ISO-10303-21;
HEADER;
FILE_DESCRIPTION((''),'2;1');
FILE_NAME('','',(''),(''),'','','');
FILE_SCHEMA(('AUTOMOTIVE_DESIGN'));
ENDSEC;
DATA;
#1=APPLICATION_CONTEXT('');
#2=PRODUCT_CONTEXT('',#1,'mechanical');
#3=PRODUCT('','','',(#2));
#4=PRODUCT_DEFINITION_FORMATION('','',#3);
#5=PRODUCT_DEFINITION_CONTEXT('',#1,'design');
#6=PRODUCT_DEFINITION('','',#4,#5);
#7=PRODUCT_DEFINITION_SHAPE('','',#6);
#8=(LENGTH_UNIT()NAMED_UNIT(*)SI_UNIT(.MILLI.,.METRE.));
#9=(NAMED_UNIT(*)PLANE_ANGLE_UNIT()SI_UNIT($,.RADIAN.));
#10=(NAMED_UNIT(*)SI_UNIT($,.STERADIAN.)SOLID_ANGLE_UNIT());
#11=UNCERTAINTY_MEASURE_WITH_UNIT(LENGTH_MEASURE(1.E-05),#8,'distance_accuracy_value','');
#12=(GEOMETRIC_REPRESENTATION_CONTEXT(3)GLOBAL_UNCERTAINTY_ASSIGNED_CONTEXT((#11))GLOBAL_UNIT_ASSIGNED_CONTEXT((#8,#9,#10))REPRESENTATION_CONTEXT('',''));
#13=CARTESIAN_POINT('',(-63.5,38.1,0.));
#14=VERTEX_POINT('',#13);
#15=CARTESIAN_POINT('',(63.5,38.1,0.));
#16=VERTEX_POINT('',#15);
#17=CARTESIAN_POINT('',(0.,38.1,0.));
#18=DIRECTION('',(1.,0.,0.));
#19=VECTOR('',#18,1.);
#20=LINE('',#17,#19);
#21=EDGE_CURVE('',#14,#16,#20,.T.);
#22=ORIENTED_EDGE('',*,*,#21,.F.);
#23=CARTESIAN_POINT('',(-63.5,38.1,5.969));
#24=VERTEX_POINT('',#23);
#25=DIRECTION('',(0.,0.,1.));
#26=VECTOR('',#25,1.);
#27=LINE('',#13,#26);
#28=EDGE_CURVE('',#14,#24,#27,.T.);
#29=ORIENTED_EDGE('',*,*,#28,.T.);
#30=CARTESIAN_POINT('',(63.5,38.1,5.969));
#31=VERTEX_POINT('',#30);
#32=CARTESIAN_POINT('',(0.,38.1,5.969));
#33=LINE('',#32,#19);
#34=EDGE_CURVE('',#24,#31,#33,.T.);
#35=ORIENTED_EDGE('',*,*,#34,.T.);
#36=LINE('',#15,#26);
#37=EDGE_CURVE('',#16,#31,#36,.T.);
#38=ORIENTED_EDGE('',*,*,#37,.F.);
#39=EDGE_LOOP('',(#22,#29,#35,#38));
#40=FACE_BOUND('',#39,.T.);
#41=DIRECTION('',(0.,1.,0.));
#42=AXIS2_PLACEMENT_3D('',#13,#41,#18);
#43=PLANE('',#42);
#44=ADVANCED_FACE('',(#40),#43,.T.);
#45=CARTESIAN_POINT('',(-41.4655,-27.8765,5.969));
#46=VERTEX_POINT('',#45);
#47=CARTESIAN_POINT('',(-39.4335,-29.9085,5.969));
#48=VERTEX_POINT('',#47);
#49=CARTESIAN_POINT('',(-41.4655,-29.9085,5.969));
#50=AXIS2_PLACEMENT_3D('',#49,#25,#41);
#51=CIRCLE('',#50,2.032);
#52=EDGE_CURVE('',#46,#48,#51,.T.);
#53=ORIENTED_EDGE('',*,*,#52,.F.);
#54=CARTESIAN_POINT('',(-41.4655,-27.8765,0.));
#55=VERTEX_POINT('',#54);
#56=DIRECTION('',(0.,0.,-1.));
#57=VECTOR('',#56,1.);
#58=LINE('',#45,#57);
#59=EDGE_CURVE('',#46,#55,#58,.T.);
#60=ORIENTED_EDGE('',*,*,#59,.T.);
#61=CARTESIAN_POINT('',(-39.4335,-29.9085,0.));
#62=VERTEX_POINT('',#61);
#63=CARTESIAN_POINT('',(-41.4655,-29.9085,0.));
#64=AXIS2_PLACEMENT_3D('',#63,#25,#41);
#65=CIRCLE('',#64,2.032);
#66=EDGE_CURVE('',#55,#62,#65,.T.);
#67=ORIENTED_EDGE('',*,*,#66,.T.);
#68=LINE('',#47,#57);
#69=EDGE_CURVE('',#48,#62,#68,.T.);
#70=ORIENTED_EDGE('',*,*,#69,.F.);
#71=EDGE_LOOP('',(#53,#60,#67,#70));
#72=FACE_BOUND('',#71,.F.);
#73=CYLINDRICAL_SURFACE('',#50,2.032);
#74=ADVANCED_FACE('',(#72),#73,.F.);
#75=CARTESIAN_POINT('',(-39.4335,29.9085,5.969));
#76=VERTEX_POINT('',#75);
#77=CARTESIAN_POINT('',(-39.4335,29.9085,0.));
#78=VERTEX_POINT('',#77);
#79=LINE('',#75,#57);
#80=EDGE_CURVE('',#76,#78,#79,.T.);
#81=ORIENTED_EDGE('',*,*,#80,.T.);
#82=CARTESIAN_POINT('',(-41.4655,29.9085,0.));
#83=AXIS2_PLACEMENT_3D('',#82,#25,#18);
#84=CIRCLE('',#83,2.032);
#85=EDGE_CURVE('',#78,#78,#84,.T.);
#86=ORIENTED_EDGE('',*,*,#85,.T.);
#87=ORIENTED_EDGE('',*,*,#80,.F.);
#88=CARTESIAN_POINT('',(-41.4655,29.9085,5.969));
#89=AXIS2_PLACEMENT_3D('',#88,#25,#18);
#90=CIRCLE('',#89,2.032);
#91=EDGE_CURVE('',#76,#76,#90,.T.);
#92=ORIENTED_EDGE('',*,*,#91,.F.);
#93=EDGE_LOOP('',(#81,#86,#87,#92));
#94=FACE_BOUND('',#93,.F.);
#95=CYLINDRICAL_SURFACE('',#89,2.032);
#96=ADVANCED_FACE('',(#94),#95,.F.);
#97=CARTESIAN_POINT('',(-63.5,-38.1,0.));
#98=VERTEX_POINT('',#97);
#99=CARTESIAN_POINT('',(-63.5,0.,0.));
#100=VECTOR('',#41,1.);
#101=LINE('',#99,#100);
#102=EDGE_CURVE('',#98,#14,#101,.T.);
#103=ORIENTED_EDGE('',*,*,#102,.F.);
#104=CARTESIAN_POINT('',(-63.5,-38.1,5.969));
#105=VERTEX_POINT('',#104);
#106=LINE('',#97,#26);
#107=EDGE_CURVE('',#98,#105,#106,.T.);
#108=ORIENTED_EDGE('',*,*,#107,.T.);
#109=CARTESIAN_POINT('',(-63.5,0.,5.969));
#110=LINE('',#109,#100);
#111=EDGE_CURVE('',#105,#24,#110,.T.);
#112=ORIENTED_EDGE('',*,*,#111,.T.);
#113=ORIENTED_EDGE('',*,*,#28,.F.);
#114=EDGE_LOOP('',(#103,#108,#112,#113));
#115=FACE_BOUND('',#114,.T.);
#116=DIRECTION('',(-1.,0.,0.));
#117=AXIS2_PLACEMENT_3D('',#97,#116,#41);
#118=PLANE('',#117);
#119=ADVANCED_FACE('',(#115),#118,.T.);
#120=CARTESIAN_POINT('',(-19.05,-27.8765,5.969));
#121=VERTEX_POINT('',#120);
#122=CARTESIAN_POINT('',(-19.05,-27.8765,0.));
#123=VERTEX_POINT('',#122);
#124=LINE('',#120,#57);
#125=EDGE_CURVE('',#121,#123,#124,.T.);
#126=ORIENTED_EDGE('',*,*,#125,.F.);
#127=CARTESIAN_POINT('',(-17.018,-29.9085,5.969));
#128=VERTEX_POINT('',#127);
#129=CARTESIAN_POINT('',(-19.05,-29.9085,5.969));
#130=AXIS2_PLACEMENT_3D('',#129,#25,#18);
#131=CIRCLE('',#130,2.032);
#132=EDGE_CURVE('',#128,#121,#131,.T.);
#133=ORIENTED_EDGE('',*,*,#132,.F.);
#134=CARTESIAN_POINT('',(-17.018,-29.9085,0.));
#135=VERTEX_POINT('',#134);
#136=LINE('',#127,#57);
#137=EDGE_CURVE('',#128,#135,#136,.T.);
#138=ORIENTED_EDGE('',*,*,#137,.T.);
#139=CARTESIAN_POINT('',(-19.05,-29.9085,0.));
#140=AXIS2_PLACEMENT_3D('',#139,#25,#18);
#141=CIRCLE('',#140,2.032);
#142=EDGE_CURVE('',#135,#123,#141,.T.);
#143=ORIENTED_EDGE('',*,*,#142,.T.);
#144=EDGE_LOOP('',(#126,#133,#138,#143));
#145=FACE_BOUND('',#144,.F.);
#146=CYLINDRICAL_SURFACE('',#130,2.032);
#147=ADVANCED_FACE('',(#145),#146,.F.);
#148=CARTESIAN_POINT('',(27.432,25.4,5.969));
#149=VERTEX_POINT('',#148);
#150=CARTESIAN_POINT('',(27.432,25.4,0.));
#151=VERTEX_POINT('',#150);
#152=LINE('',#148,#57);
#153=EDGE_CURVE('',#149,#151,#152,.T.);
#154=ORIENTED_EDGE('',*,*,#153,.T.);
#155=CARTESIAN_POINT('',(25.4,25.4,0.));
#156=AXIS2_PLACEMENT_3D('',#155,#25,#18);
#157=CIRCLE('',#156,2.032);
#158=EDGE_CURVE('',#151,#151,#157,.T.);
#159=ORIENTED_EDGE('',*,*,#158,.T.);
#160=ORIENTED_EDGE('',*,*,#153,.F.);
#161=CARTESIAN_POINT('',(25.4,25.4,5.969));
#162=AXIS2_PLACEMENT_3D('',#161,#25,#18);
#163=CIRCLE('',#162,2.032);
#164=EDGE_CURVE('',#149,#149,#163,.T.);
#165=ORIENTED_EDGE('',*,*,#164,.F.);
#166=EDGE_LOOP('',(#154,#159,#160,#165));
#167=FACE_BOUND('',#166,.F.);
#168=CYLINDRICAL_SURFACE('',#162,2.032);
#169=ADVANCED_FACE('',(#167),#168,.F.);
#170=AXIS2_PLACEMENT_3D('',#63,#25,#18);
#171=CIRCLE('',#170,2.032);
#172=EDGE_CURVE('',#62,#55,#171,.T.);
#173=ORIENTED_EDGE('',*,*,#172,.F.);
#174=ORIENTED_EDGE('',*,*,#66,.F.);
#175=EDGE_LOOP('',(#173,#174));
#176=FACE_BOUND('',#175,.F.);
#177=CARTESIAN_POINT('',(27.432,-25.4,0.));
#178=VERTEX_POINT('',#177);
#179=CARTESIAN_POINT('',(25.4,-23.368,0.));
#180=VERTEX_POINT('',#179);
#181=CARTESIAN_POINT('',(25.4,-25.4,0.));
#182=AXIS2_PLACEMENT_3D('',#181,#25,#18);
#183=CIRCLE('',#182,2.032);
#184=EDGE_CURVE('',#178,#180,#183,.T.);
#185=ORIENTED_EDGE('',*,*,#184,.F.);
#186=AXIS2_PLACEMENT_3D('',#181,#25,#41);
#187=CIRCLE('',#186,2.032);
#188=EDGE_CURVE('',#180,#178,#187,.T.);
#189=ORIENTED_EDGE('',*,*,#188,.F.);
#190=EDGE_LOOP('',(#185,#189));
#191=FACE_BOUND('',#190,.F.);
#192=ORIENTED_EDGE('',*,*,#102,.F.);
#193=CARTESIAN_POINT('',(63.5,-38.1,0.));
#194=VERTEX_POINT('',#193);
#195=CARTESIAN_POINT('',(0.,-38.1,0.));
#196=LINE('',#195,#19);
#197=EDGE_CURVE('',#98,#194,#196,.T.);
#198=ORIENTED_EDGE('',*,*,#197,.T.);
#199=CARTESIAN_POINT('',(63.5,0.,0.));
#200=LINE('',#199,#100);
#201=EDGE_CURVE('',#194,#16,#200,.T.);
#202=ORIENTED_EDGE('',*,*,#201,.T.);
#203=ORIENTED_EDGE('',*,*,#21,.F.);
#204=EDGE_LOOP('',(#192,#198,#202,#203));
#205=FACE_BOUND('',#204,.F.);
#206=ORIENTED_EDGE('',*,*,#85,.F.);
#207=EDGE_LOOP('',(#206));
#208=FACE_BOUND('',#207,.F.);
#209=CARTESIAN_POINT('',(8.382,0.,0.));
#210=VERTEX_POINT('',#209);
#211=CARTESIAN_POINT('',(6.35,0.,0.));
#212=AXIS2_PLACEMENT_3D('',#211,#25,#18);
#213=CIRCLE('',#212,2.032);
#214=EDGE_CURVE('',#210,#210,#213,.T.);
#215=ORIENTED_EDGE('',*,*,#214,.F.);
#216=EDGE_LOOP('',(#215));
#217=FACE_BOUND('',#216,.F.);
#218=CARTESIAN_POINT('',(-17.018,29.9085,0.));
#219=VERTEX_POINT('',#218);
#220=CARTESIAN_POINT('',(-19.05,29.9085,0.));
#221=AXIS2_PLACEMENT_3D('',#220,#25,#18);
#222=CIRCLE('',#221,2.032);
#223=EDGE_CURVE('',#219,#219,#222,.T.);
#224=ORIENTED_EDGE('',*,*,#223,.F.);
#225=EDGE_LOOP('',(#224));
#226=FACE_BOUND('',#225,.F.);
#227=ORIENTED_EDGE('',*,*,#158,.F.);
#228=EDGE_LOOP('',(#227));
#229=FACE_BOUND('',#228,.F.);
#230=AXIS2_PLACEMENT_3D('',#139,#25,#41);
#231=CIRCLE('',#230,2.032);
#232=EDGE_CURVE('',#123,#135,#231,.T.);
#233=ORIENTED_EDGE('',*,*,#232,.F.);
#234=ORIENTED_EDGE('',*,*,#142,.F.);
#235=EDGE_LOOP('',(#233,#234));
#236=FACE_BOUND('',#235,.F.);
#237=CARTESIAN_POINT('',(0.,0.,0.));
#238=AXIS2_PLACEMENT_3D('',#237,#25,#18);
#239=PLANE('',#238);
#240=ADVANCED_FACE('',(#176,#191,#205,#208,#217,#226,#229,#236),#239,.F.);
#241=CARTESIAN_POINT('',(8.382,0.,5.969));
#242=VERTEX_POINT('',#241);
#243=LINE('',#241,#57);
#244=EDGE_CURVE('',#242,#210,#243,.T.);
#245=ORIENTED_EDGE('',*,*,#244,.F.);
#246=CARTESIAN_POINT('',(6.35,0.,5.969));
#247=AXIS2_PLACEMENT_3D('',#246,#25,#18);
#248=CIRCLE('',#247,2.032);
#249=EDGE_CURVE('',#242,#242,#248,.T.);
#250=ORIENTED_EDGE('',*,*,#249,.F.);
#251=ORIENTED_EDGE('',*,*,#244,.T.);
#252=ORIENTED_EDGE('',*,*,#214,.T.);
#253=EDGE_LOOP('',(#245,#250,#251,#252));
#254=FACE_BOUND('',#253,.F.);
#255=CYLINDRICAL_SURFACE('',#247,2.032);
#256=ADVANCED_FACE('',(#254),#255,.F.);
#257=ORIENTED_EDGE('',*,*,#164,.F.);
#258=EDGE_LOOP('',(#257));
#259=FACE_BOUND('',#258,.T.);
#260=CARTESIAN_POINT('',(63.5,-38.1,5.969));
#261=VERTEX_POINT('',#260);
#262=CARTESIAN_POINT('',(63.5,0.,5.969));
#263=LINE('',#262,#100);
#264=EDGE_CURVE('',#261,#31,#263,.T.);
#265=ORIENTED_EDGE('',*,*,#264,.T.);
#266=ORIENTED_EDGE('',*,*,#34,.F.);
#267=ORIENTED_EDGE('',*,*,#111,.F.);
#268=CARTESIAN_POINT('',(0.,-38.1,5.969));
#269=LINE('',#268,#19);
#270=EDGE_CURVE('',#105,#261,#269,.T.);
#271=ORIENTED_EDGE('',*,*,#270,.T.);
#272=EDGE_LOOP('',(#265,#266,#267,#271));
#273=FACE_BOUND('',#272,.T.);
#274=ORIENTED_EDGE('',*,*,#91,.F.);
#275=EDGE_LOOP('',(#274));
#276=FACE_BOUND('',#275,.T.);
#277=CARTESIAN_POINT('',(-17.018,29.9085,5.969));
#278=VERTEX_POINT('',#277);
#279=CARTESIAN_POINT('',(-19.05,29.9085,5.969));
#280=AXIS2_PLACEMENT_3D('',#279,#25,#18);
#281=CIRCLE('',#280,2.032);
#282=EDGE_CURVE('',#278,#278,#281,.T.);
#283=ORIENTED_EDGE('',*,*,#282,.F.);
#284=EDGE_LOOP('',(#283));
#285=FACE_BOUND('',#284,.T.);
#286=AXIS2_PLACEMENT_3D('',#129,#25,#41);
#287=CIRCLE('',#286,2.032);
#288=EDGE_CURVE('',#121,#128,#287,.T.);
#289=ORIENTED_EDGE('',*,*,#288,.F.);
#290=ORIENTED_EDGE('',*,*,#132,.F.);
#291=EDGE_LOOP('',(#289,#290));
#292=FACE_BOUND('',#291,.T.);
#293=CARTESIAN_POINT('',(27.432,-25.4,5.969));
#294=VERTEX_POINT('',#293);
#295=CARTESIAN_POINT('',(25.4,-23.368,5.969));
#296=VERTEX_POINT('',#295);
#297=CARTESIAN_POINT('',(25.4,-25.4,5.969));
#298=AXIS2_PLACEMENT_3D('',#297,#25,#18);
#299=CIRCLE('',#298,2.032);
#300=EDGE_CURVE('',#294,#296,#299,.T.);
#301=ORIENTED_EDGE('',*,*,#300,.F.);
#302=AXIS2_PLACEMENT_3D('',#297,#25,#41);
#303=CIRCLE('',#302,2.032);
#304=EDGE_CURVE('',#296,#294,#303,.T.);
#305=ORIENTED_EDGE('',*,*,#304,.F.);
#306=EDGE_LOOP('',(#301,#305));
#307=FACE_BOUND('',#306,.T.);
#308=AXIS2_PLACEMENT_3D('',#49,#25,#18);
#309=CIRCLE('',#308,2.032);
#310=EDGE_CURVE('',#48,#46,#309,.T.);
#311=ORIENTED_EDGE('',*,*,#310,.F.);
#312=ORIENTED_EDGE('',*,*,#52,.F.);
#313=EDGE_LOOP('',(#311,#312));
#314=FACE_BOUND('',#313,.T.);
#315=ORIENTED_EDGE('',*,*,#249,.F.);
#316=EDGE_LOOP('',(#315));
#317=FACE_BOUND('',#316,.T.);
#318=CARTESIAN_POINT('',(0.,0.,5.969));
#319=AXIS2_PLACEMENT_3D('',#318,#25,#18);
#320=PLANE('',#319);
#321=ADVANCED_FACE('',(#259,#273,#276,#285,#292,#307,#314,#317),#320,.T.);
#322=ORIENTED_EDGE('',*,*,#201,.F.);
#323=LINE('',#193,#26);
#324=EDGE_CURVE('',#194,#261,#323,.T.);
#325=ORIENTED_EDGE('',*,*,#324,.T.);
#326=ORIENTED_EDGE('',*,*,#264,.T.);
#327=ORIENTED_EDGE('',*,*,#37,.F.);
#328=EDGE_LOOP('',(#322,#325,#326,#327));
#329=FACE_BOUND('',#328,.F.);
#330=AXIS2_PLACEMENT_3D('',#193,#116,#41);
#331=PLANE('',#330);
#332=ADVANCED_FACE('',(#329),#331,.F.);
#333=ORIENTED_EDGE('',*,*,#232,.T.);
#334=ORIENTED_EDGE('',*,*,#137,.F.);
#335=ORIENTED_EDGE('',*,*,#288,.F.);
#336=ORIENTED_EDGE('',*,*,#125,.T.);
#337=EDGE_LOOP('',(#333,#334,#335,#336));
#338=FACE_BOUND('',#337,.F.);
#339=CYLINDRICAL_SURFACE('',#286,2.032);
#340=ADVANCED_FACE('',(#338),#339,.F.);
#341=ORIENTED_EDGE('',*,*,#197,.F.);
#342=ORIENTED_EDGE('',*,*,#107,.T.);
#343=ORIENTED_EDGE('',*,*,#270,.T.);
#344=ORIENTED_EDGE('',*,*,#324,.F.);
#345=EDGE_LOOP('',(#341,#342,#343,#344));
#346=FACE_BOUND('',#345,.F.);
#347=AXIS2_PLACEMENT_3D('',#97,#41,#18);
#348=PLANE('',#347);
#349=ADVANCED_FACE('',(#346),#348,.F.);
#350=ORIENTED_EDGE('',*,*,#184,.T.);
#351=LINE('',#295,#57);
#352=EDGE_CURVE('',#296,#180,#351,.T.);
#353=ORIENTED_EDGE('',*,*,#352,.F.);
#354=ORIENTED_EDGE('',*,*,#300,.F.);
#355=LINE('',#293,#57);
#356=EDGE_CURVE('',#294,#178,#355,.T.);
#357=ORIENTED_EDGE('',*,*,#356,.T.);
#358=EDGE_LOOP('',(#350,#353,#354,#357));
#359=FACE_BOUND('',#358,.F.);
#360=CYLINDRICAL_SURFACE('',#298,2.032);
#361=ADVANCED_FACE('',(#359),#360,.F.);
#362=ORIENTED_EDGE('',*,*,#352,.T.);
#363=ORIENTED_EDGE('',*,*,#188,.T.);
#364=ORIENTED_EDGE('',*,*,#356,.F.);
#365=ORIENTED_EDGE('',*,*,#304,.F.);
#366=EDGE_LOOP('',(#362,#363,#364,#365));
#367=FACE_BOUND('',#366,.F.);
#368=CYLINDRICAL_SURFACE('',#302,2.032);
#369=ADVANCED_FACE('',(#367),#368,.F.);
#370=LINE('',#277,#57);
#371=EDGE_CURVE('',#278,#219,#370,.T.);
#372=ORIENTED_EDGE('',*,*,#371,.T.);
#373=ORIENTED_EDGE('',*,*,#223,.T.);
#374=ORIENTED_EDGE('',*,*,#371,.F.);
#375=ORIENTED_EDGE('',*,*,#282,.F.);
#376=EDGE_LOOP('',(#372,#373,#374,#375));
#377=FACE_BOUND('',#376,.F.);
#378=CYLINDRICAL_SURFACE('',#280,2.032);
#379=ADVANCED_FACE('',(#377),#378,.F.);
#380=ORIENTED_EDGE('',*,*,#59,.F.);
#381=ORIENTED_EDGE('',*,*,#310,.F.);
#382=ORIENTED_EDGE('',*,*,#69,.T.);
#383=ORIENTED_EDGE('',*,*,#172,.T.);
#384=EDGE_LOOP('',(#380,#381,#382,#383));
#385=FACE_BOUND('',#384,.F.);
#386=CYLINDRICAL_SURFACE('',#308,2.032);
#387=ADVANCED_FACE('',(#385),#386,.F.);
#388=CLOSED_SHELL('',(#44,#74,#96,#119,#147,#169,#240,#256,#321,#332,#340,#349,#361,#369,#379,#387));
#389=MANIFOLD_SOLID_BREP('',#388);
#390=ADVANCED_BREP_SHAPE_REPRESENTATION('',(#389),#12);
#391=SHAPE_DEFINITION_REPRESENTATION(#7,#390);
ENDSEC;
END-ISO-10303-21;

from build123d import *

# Parameters (mm, degrees)
F0_W     = 127
F0_H     = 76.2
F2_DEPTH = 5.969
F3_R     = 2.032
F4_DEPTH = 5.969


# Not quite as in the source:
# - a variable given as a bare number and used for a length is read in inches; the dataset says mm whatever the document's units were


with BuildPart() as f2:
    # F0 (on Top) → F2 (new body)
    with BuildSketch(Plane.XY):
        Rectangle(F0_W, F0_H)
    extrude(amount=F2_DEPTH)

    # F3 (on face) → F4 (cut, through all)
    with BuildSketch(Plane.XY.offset(5.969)):
        with BuildLine():
            ThreePointArc((-39.4335, -29.9085), (-40.0286590206, -28.4716590206), (-41.4655, -27.8765))
            ThreePointArc((-41.4655, -27.8765), (-42.9023409794, -31.3453409794), (-39.4335, -29.9085))
        make_face()
        with BuildLine():
            ThreePointArc((-17.018, -29.9085), (-17.6131590206, -28.4716590206), (-19.05, -27.8765))
            ThreePointArc((-19.05, -27.8765), (-20.4868409794, -31.3453409794), (-17.018, -29.9085))
        make_face()
        with BuildLine():
            Line((6.35, 0), (4.318, 0))
            ThreePointArc((4.318, 0), (6.35, -2.032), (8.382, 0))
            Line((8.382, 0), (6.35, 0))
        make_face()
        with BuildLine():
            ThreePointArc((8.382, 0), (6.35, 2.032), (4.318, 0))
            Line((4.318, 0), (6.35, 0))
            Line((6.35, 0), (8.382, 0))
        make_face()
        with BuildLine():
            ThreePointArc((27.432, -25.4), (26.8368409794, -23.9631590206), (25.4, -23.368))
            ThreePointArc((25.4, -23.368), (23.9631590206, -26.8368409794), (27.432, -25.4))
        make_face()
        with Locations((-41.4655, 29.9085)):
            Circle(F3_R)
        with Locations((-19.05, 29.9085)):
            Circle(F3_R)
        with Locations((25.4, 25.4)):
            Circle(F3_R)
    extrude(amount=-F4_DEPTH, mode=Mode.SUBTRACT)


solid = f2.part
